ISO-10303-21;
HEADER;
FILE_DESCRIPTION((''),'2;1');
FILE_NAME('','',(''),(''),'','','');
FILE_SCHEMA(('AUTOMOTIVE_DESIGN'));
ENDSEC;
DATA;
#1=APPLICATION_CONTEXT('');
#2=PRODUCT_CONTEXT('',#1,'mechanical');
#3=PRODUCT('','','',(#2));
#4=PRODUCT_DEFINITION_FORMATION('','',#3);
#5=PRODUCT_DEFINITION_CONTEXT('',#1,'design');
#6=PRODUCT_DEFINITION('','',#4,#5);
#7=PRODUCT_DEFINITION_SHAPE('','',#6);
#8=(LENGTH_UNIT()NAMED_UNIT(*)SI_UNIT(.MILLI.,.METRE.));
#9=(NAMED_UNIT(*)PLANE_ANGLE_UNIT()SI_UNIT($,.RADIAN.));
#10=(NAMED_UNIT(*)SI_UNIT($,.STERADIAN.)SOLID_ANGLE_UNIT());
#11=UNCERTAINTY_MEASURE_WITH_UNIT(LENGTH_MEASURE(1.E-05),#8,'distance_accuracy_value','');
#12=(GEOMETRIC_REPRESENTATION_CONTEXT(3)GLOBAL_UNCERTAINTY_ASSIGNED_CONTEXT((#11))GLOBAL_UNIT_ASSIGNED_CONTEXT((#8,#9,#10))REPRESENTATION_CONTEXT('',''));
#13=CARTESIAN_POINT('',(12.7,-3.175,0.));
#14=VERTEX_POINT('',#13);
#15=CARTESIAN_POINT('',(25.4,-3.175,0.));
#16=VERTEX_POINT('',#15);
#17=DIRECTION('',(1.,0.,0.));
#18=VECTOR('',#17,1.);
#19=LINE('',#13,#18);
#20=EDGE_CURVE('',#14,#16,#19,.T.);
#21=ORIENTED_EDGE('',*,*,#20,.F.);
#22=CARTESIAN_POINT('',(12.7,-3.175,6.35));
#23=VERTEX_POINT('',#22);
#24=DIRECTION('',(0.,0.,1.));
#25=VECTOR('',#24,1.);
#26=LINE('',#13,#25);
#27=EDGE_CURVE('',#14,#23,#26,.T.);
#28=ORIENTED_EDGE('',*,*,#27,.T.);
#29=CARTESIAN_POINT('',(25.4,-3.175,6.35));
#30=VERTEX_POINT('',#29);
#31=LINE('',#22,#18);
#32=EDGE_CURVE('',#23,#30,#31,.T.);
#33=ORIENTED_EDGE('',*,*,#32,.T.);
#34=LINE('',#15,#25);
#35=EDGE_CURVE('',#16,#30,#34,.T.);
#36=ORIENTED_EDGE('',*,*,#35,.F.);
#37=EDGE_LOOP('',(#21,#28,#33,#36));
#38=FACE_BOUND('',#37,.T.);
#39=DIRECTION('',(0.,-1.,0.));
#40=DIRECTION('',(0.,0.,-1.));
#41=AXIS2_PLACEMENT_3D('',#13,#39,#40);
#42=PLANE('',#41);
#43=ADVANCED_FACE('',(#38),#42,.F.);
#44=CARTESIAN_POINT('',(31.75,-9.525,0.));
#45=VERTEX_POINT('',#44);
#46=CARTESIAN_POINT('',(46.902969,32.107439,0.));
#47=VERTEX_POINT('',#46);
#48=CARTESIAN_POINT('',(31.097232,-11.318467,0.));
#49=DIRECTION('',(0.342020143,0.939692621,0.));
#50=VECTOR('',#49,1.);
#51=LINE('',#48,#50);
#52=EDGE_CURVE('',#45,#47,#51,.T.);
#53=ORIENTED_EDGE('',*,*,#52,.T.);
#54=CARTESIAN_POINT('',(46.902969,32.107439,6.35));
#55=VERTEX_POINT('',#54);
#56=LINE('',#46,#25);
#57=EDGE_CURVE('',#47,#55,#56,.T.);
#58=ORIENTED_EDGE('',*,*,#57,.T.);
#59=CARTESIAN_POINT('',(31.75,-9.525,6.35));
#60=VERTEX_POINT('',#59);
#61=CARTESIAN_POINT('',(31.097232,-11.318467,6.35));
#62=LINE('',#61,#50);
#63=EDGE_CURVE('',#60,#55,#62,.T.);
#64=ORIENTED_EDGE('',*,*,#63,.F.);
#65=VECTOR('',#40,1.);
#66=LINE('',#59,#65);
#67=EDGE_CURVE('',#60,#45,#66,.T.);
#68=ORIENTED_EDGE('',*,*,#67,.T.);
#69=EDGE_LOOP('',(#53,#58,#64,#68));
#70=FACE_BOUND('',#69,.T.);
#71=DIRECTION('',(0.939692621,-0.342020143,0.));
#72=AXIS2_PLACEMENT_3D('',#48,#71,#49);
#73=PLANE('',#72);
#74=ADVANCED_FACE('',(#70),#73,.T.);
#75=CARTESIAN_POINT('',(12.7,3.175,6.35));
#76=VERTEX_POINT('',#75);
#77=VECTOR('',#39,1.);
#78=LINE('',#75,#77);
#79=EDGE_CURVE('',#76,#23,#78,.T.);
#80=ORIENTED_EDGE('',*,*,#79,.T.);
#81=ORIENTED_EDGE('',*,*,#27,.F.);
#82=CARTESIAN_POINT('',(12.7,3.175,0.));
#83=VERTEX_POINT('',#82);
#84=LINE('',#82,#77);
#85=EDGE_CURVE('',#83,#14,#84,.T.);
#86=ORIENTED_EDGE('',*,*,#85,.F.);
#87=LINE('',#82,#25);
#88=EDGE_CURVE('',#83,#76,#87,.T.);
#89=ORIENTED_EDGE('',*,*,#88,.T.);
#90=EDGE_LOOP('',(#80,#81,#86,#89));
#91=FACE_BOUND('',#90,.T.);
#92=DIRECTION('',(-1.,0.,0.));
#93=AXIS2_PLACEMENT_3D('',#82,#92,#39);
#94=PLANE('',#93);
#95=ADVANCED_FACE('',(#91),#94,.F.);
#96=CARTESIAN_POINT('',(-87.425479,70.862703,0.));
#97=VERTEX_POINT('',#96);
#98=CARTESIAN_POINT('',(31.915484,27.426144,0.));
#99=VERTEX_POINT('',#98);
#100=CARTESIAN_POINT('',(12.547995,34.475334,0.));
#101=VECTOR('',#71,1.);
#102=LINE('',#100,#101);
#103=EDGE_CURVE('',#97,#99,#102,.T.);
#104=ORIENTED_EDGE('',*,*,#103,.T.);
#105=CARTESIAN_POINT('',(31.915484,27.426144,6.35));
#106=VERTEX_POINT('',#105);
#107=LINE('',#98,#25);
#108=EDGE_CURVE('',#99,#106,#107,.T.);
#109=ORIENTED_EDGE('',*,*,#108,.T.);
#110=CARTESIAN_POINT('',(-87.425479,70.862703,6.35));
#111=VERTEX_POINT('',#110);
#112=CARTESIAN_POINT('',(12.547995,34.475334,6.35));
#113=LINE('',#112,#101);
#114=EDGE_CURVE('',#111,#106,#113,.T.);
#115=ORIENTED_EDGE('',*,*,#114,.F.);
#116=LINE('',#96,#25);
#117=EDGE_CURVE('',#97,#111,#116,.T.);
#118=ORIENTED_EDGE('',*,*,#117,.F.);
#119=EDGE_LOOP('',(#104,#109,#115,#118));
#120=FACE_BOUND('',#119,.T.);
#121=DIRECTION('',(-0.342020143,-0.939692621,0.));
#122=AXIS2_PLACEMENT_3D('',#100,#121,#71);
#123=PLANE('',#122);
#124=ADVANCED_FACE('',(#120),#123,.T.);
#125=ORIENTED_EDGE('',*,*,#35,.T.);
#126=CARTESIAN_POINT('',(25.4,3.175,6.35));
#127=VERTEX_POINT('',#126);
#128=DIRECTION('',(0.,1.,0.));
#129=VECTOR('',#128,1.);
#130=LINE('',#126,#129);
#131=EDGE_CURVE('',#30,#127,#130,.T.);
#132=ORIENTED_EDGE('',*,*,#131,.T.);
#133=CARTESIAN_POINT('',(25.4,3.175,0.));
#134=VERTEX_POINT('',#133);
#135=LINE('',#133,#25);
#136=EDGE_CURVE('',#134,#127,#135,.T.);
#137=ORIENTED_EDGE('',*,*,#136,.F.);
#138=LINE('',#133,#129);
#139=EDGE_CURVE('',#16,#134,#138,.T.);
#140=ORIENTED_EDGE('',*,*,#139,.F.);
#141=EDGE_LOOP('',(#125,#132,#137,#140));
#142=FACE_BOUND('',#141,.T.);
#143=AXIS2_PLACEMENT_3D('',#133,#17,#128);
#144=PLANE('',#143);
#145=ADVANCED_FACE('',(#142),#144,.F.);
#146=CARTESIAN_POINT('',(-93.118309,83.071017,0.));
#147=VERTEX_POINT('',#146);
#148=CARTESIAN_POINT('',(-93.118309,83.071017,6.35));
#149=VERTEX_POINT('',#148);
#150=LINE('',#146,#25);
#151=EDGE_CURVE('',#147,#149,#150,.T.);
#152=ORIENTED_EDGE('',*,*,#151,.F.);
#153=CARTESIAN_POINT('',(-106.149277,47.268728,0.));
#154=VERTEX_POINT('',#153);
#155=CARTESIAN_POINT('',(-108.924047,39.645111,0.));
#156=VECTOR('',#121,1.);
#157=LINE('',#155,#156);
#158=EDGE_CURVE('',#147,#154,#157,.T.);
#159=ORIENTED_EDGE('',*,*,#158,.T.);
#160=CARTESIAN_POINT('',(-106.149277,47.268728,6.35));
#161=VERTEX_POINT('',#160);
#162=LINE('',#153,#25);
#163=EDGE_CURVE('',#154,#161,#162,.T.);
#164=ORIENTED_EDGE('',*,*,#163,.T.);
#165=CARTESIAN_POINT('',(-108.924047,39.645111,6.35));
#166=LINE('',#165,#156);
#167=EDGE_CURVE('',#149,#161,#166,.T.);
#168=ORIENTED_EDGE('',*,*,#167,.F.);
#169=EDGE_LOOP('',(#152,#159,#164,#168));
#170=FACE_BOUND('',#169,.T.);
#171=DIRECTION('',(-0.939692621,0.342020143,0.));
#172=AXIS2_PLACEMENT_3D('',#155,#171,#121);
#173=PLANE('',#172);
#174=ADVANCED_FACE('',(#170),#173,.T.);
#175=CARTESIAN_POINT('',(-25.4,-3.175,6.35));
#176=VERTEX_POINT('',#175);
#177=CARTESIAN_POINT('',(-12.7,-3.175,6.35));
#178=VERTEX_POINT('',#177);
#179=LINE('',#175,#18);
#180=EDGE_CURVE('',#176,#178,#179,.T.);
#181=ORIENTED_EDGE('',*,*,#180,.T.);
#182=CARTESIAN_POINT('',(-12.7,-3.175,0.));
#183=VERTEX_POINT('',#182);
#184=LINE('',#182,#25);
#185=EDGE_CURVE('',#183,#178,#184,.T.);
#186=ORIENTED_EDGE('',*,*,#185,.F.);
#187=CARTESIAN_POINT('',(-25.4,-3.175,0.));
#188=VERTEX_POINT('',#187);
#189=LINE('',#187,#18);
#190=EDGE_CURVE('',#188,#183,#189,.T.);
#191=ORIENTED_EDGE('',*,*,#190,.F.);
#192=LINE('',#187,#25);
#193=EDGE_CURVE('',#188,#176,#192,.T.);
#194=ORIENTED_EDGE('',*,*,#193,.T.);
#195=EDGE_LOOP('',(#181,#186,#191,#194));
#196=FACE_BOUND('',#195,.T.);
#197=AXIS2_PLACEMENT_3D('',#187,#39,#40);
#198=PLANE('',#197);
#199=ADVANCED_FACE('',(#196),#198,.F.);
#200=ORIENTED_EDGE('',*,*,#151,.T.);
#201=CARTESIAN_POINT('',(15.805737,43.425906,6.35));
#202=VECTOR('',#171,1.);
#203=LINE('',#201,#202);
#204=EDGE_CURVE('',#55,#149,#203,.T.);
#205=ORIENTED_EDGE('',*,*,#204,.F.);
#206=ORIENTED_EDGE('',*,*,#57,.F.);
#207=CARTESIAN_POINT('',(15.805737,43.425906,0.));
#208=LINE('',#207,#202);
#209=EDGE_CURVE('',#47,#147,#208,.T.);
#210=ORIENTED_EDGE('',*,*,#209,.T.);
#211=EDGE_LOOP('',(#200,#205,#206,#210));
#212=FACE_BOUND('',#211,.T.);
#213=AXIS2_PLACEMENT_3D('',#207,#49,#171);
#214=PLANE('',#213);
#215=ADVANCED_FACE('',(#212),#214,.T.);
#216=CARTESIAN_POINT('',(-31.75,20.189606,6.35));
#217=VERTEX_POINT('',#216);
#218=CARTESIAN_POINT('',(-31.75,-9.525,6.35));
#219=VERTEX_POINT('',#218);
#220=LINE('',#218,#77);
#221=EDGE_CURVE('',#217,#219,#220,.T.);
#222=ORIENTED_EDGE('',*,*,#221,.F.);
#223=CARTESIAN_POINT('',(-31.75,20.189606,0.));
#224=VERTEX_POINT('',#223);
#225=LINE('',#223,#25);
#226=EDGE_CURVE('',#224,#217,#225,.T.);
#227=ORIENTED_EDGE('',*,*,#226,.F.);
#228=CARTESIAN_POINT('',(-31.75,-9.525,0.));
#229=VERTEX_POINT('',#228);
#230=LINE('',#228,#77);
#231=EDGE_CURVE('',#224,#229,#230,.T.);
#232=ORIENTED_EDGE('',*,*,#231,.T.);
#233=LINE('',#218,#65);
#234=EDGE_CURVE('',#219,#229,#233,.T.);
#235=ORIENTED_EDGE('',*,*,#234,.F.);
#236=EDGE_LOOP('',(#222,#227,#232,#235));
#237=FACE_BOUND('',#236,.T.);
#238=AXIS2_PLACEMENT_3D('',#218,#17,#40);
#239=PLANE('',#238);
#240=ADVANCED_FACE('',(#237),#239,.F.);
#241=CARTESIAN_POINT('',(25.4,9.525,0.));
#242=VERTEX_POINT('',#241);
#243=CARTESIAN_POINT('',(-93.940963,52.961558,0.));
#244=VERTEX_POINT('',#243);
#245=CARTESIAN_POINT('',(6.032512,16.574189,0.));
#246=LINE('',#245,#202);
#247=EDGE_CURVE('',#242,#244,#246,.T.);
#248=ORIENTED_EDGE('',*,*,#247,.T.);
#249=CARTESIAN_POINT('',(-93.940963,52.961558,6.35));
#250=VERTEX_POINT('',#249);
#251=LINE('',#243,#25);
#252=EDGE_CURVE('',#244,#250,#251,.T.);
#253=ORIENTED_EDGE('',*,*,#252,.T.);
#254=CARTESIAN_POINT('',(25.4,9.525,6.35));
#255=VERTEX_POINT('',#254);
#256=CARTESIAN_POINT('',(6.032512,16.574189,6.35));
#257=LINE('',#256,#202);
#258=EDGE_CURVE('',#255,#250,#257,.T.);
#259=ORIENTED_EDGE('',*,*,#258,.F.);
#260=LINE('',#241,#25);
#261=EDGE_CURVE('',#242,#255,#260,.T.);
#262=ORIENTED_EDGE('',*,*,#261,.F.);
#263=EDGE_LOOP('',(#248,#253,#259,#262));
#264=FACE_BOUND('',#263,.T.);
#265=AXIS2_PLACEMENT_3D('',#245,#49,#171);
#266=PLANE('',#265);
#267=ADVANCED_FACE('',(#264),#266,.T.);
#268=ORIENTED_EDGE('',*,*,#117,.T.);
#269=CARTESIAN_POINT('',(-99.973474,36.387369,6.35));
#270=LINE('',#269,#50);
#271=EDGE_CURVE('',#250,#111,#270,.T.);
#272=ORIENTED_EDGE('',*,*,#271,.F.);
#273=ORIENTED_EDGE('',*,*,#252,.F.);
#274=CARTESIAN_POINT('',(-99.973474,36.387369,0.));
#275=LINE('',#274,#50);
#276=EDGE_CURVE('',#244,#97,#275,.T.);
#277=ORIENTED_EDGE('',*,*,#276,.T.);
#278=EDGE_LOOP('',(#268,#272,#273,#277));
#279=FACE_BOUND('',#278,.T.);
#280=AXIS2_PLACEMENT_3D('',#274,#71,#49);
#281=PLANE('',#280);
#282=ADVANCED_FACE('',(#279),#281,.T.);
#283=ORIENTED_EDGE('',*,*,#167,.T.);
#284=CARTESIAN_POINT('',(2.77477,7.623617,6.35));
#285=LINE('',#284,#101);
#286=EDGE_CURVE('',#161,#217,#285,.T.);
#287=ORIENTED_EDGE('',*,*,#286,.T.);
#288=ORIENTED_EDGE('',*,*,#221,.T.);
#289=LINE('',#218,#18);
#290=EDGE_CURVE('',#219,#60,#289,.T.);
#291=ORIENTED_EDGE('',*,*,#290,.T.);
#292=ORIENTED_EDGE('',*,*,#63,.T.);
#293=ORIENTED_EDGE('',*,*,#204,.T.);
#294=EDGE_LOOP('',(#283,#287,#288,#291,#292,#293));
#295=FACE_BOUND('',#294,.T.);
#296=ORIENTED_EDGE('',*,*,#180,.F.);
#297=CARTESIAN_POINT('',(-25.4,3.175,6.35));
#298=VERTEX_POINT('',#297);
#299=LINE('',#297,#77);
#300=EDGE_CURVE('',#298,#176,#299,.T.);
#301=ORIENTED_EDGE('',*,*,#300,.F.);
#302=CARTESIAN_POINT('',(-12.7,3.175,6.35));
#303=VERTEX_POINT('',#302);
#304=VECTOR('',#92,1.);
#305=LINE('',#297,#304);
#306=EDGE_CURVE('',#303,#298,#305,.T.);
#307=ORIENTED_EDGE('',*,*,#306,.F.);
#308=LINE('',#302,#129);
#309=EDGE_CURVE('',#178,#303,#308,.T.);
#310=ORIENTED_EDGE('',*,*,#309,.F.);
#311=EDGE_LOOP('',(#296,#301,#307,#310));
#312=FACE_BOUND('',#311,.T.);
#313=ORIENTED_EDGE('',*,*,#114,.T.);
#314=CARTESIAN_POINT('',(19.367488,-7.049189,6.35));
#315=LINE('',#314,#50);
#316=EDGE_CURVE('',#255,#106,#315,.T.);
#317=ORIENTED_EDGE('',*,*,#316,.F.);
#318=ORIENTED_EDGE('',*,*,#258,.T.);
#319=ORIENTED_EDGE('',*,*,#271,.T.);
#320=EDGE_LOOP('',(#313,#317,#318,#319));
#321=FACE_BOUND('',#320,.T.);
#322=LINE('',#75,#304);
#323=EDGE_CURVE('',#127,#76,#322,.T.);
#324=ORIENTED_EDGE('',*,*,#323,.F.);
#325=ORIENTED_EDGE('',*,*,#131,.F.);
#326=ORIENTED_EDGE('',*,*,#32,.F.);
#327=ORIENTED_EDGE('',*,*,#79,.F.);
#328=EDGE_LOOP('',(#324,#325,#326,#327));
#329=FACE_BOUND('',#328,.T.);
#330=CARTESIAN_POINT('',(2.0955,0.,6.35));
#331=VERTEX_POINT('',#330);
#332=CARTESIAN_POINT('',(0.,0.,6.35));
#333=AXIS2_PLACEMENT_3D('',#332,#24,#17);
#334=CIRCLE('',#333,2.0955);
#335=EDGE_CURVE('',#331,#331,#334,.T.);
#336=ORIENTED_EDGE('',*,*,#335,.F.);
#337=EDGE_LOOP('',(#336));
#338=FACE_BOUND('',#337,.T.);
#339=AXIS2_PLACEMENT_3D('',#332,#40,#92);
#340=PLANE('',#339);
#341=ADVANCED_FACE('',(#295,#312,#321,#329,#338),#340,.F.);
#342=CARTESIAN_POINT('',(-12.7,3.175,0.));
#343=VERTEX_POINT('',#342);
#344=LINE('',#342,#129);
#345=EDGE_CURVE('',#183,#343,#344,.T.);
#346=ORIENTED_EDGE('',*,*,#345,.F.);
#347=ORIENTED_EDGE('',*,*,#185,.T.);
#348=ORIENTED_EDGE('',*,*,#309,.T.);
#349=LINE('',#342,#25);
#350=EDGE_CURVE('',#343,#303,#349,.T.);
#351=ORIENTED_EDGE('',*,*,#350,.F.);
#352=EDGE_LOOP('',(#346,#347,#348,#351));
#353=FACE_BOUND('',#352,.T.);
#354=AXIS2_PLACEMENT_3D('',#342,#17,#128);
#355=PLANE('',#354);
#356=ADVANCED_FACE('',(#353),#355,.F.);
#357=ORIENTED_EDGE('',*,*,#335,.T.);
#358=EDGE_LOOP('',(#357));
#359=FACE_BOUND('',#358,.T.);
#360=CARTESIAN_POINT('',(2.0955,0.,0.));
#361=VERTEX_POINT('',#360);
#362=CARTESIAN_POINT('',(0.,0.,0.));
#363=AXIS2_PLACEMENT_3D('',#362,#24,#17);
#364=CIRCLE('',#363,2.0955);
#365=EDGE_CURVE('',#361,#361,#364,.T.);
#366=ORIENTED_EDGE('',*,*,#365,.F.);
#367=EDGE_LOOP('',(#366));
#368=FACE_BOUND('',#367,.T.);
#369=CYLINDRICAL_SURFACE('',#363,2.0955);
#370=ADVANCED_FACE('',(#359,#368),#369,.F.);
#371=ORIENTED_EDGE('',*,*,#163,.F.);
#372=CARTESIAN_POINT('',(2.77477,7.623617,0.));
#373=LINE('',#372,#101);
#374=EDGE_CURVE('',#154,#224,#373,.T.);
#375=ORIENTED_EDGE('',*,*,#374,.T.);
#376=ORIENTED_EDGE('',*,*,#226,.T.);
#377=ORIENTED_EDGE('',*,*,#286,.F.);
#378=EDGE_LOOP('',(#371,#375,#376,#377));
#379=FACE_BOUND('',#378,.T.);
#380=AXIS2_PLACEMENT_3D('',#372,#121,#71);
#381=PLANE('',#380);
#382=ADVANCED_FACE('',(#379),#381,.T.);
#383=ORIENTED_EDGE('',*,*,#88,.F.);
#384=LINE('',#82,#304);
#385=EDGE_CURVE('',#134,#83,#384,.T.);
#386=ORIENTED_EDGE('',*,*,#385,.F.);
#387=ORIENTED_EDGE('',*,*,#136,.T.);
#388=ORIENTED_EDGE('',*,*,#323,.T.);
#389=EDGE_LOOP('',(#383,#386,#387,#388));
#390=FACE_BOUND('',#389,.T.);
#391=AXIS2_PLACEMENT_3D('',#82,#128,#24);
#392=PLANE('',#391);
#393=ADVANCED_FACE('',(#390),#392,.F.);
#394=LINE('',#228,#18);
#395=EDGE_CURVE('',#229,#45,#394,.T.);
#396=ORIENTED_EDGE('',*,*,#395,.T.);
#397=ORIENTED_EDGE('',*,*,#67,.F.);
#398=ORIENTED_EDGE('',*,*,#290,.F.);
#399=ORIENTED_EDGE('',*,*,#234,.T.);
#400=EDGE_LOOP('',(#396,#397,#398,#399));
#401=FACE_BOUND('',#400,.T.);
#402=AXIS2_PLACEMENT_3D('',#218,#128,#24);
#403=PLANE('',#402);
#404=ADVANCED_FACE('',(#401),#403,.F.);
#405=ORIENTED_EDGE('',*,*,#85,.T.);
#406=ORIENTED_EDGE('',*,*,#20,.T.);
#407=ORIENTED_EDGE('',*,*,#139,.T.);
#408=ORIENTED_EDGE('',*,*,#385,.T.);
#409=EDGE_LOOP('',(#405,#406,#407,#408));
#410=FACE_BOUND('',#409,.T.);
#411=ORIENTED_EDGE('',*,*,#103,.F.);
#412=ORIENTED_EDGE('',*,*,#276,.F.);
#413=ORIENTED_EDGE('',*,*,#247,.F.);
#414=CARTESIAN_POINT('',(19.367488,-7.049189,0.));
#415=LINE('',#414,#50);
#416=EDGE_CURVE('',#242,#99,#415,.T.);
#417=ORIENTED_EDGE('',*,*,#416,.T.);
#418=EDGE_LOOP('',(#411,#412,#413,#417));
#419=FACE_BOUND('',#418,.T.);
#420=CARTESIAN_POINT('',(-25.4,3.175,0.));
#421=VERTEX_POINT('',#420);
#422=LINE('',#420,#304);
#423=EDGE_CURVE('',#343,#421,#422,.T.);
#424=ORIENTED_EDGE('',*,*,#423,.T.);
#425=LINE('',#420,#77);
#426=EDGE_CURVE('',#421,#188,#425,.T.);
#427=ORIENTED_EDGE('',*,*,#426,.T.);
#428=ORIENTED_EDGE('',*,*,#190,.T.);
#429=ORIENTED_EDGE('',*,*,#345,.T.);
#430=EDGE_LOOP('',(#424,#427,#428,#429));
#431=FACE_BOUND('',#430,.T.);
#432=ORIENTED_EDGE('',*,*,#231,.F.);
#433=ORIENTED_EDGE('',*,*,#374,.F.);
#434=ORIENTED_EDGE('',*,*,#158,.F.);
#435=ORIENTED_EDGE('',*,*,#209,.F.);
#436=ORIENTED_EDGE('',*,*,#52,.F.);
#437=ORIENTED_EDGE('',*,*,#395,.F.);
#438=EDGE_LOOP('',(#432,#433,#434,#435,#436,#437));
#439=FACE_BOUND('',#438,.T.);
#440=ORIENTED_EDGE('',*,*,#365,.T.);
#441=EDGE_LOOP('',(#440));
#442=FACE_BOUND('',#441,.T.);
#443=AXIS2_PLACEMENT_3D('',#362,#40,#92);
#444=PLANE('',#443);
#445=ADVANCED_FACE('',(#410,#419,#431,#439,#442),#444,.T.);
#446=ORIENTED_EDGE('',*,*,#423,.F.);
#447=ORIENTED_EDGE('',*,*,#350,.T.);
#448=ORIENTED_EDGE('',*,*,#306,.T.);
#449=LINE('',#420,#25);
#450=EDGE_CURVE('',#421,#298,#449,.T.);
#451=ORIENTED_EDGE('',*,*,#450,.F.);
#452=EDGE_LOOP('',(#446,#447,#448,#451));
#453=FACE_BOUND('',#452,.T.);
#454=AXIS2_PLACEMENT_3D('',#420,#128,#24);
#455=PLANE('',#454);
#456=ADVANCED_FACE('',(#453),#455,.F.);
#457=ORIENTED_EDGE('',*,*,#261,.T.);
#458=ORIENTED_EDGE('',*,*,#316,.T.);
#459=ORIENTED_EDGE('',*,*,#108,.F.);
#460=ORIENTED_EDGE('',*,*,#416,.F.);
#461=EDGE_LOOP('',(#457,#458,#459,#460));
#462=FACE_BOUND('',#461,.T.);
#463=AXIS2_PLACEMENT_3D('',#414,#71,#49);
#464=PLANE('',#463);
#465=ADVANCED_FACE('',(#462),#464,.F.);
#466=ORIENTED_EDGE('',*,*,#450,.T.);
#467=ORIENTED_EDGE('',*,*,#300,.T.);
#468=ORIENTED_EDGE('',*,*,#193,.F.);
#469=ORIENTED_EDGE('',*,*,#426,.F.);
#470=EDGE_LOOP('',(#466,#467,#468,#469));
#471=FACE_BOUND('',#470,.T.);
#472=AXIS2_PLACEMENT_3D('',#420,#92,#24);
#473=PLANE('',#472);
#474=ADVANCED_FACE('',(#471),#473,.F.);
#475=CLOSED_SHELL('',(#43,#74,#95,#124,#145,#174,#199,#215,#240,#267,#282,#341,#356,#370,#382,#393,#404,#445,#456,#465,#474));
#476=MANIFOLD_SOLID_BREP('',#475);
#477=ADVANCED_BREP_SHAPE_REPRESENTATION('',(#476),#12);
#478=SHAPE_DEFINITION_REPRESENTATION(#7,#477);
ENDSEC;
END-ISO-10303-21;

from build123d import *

# Parameters (mm, degrees)
SKETCH1_W               = 63.5
SKETCH1_H               = 19.05
BOSS_EXTRUDE1_DEPTH     = 6.35
SKETCH2_R               = 2.0955
SKETCH2_W               = 12.7
SKETCH2_H               = 6.35
CUT_EXTRUDE1_DEPTH      = 6.35
BOSS_EXTRUDE2_START     = -6.35
BOSS_EXTRUDE2_OUTLINE_W = 12.7
BOSS_EXTRUDE2_OUTLINE_H = 6.35
BOSS_EXTRUDE2_OUTLINE_R = 2.0955
BOSS_EXTRUDE2_DEPTH     = 6.35


with BuildPart() as part:
    # Sketch1 → Boss-Extrude1 (new body)
    with BuildSketch(Plane.XY):
        Rectangle(SKETCH1_W, SKETCH1_H)
    extrude(amount=BOSS_EXTRUDE1_DEPTH)

    # Sketch2 → Cut-Extrude1 (cut)
    with BuildSketch(Plane.XY.offset(6.35)):
        Circle(SKETCH2_R)
        with Locations((-19.05, 0)):
            Rectangle(SKETCH2_W, SKETCH2_H)
        with Locations((19.05, 0)):
            Rectangle(SKETCH2_W, SKETCH2_H)
    extrude(amount=-CUT_EXTRUDE1_DEPTH, mode=Mode.SUBTRACT)

    # Boss-Extrude2: read off the stored shape, not the designer's step
    # Boss-Extrude2 outline → Boss-Extrude2 (add)
    with BuildSketch(Plane.XY.offset(6.35).offset(BOSS_EXTRUDE2_START)):
        Polygon((-31.75, 20.189605605), (-31.75, -9.525), (31.75, -9.525), (46.902968685, 32.107439299), (-93.118309457, 83.071016706), (-106.149276918, 47.268727855), align=None)
        with Locations((-19.05, 0)):
            Rectangle(BOSS_EXTRUDE2_OUTLINE_W, BOSS_EXTRUDE2_OUTLINE_H, mode=Mode.SUBTRACT)
        Circle(BOSS_EXTRUDE2_OUTLINE_R, mode=Mode.SUBTRACT)
        with Locations((19.05, 0)):
            Rectangle(BOSS_EXTRUDE2_OUTLINE_W, BOSS_EXTRUDE2_OUTLINE_H, mode=Mode.SUBTRACT)
        Polygon((-87.425479109, 70.862702628), (31.91548373, 27.426144426), (25.4, 9.525), (-93.94096284, 52.961558202), align=None, mode=Mode.SUBTRACT)
    extrude(amount=BOSS_EXTRUDE2_DEPTH)


solid = part.part
